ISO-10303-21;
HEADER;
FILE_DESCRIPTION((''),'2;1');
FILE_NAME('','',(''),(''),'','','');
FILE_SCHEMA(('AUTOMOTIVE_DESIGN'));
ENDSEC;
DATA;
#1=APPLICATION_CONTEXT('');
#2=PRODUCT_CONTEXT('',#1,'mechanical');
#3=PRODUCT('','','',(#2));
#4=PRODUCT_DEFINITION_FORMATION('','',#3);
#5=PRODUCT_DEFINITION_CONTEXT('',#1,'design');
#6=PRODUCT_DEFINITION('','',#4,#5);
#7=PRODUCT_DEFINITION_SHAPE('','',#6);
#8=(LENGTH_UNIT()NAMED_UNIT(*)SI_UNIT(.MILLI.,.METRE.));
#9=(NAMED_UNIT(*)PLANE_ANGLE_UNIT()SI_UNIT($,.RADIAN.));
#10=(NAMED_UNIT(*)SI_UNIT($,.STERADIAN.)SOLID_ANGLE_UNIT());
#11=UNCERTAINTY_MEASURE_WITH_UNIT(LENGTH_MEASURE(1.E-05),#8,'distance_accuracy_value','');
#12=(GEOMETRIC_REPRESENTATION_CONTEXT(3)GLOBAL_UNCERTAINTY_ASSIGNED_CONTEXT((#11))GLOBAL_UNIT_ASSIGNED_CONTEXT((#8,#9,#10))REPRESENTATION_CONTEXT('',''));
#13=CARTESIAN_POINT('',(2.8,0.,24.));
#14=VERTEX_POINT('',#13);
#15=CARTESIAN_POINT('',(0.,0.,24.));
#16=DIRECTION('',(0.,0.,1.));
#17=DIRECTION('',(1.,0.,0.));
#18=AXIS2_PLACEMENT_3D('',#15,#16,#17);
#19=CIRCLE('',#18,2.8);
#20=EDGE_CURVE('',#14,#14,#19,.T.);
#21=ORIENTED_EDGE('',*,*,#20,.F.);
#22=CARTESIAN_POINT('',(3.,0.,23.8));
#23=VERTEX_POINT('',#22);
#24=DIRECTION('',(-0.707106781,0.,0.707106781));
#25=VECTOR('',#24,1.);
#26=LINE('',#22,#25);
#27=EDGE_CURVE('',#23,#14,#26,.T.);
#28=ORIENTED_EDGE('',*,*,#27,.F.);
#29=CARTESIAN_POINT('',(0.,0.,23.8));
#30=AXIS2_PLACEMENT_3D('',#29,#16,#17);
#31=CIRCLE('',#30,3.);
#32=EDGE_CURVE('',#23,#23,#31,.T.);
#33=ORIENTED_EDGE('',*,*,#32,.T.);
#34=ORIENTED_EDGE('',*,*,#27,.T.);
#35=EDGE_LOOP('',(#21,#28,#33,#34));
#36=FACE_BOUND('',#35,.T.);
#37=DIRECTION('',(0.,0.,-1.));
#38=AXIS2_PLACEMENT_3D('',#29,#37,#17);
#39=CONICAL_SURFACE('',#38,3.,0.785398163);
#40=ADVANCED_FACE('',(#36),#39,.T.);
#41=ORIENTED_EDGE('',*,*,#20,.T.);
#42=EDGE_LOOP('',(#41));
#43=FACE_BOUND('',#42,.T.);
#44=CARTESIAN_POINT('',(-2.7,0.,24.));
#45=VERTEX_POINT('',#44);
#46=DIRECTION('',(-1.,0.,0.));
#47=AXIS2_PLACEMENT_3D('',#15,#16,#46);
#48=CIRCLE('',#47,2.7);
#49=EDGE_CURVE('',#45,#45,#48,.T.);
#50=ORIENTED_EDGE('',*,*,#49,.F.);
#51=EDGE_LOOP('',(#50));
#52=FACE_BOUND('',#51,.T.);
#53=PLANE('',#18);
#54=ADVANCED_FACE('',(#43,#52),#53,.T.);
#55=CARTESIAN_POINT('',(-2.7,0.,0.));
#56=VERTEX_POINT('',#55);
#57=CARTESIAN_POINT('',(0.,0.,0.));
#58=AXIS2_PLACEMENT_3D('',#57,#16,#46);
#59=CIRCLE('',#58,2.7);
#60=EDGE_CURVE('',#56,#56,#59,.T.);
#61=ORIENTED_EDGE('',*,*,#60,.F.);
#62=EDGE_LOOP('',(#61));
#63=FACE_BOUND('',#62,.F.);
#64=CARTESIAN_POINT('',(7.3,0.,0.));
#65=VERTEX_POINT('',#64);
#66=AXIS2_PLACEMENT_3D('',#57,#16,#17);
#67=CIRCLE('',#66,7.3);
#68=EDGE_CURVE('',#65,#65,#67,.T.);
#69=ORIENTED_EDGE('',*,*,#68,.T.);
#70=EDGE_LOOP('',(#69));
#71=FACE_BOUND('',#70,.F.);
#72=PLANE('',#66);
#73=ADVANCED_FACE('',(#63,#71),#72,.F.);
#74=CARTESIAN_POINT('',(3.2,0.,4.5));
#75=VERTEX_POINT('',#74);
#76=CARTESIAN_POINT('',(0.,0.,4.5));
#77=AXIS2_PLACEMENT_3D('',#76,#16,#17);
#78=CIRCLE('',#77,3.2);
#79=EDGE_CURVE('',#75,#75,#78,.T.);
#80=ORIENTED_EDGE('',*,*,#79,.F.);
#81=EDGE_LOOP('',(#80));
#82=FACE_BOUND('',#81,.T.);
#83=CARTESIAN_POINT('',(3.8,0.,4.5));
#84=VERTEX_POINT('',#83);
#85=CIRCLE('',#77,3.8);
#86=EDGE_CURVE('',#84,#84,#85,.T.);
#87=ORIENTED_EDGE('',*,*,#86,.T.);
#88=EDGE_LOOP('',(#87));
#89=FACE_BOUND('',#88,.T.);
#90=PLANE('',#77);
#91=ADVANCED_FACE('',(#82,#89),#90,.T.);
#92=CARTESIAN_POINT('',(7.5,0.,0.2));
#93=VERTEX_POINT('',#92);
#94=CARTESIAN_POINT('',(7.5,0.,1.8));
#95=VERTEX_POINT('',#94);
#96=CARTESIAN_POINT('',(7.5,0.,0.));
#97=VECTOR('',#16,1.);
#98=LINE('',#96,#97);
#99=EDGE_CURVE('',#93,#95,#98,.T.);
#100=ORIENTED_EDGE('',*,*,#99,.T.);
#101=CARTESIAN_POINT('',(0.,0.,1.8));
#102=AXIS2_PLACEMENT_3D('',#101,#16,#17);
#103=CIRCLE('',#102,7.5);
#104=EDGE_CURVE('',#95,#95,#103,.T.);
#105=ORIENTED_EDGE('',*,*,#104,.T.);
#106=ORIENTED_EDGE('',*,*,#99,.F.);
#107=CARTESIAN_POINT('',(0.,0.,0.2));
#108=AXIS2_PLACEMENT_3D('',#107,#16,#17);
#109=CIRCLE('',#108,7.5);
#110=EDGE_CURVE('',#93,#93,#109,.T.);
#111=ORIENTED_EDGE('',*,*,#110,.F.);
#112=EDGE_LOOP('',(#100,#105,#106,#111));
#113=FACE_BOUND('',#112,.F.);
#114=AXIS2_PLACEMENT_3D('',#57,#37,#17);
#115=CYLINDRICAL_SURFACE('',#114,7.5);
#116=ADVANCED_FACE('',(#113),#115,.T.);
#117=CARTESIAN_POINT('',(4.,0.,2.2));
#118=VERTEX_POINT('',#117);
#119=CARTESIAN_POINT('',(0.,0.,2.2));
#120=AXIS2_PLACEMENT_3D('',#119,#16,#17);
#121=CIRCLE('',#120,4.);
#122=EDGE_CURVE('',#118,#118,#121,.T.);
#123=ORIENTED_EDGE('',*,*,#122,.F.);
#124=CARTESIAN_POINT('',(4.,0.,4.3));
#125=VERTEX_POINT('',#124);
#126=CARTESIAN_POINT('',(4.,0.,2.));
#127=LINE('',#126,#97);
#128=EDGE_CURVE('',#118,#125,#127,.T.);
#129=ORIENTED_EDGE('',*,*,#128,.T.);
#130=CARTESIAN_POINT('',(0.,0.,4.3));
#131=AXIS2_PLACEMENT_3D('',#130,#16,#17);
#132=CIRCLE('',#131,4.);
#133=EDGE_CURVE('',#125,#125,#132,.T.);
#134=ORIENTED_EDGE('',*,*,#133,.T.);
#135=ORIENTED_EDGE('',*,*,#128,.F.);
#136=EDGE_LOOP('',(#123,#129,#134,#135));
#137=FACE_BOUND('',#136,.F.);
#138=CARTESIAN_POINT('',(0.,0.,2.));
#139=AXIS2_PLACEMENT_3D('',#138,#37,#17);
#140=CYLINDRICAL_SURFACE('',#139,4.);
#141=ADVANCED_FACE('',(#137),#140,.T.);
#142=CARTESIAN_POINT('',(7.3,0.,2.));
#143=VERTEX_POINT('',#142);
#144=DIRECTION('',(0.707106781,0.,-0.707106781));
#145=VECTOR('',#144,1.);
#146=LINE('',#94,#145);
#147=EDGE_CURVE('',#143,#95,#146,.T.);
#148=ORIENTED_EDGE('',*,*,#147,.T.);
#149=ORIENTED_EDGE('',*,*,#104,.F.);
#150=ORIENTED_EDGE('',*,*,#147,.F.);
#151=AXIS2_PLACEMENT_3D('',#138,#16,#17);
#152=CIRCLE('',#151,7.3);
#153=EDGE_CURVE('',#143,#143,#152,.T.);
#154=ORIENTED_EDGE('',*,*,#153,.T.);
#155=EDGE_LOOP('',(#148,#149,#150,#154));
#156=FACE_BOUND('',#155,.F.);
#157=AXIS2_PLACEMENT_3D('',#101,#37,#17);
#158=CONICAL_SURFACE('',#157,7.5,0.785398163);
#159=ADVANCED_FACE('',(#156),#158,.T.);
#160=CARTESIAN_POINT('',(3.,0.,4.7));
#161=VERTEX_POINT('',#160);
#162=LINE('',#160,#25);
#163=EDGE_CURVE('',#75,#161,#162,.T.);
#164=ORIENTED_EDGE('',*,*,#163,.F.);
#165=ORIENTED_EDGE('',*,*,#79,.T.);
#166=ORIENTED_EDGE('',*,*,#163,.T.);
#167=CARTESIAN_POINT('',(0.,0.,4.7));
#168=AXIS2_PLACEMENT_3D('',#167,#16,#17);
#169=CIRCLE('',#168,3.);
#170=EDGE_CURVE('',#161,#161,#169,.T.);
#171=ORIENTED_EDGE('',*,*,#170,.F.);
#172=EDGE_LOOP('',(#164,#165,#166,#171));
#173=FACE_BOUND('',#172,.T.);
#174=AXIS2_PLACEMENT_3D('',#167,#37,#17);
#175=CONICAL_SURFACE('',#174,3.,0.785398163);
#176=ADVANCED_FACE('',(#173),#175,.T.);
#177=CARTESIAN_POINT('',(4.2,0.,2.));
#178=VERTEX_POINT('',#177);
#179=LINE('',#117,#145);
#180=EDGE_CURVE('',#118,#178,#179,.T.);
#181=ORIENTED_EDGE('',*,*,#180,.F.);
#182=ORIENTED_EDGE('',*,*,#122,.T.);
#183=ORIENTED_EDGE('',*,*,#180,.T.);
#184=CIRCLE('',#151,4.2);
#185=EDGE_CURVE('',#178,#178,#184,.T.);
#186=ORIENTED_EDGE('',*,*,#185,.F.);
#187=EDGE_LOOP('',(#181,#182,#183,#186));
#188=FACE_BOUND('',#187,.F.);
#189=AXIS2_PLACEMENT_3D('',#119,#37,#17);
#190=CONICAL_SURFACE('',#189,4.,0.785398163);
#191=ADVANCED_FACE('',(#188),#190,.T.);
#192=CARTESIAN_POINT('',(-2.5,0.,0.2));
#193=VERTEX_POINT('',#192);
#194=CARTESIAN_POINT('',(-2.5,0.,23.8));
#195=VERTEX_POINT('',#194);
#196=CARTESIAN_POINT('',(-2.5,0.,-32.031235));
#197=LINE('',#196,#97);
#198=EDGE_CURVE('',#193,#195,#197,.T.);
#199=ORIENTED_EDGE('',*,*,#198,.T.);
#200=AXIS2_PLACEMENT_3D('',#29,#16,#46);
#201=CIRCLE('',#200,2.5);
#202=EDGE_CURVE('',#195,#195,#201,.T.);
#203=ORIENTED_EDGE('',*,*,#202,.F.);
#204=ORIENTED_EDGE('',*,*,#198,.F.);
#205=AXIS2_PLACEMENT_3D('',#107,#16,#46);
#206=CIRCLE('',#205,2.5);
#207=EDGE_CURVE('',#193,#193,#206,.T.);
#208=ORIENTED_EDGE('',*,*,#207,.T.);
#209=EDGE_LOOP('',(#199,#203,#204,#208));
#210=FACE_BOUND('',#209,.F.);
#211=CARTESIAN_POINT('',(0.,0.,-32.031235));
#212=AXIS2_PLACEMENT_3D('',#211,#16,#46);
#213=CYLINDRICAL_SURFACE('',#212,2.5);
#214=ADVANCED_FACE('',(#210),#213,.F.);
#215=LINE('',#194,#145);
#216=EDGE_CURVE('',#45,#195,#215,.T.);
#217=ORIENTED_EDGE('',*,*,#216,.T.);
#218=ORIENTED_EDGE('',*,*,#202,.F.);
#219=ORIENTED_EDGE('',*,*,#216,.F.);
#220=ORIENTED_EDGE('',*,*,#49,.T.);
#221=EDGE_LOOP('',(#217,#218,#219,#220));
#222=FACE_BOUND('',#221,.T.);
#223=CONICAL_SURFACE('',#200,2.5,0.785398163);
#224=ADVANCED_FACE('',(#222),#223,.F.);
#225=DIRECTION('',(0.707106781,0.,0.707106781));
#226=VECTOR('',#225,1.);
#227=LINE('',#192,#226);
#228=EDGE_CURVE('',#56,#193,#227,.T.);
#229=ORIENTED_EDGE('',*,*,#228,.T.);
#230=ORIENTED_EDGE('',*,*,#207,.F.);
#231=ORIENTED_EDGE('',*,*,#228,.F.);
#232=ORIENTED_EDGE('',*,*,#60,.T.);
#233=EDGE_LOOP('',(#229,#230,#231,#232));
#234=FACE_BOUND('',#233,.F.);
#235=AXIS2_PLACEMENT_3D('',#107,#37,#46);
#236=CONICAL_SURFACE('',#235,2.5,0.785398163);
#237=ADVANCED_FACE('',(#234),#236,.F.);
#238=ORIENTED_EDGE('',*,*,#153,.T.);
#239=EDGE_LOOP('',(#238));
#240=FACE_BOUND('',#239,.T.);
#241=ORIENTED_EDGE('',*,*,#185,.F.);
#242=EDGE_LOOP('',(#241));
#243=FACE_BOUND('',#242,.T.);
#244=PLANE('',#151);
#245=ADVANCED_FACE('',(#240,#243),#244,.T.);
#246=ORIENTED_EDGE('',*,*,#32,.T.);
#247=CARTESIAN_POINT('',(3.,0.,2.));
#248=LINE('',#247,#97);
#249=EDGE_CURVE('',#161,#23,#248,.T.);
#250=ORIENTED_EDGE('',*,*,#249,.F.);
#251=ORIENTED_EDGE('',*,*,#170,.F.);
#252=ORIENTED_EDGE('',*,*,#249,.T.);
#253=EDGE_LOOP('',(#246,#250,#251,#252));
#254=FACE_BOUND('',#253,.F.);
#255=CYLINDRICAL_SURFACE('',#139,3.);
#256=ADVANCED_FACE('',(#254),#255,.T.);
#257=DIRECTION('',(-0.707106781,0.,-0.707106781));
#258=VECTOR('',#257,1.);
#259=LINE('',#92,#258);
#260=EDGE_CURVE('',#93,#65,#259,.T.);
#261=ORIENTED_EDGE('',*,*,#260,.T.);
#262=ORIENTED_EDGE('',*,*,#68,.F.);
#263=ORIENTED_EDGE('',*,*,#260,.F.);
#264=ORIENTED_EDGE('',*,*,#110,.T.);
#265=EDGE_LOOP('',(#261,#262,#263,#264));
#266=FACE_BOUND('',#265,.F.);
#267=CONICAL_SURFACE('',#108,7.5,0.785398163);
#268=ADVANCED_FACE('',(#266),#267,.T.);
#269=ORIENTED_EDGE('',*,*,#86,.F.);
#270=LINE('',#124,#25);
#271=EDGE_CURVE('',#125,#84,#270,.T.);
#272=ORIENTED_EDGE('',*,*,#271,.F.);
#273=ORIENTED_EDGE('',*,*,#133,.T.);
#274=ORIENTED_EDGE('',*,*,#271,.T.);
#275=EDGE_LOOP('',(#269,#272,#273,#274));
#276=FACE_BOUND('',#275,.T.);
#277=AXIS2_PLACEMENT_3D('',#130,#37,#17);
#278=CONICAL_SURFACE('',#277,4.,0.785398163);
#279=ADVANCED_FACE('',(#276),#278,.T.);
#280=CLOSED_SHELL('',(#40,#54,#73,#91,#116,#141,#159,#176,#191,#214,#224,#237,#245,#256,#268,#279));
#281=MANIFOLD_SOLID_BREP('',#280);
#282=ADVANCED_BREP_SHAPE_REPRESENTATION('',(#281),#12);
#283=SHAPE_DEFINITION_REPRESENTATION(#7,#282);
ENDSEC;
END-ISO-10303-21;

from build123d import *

# Parameters (mm, degrees)
F0_R     = 7.5
F1_DEPTH = 2
F2_R     = 3
F3_DEPTH = 22
F5_D     = 5
F6_R     = 4
F6_R_2   = 3
F7_DEPTH = 2.5
F8_SIZE  = 0.2


with BuildPart() as f1:
    # F0 (on Top) → F1 (new body)
    with BuildSketch(Plane.XY):
        Circle(F0_R)
    extrude(amount=F1_DEPTH)

    # F2 (on face) → F3 (join)
    with BuildSketch(Plane.XY.offset(2)):
        Circle(F2_R)
    extrude(amount=F3_DEPTH)

    # F5 (through all)
    with Locations(Plane(origin=(0, 0, 0), x_dir=(1, 0, 0), z_dir=(0, 0, -1))):
        with Locations((0, 0)):
            Hole(F5_D / 2)

    # F6 (on face) → F7 (join)
    with BuildSketch(Plane.XY.offset(2)):
        Circle(F6_R)
        Circle(F6_R_2, mode=Mode.SUBTRACT)
    extrude(amount=F7_DEPTH)

    # F8
    f8_edges = [f1.edges().sort_by_distance(p)[0] for p in [
        (-3, 0, 24),
        (-7.5, 0, 2),
        (-7.5, 0, 0),
        (-3, 0, 4.5),
        (-4, 0, 4.5),
        (-4, 0, 2),
        (-2.5, 0, 0),
        (-2.5, 0, 24),
    ]]
    chamfer(f8_edges, length=F8_SIZE)


solid = f1.part
